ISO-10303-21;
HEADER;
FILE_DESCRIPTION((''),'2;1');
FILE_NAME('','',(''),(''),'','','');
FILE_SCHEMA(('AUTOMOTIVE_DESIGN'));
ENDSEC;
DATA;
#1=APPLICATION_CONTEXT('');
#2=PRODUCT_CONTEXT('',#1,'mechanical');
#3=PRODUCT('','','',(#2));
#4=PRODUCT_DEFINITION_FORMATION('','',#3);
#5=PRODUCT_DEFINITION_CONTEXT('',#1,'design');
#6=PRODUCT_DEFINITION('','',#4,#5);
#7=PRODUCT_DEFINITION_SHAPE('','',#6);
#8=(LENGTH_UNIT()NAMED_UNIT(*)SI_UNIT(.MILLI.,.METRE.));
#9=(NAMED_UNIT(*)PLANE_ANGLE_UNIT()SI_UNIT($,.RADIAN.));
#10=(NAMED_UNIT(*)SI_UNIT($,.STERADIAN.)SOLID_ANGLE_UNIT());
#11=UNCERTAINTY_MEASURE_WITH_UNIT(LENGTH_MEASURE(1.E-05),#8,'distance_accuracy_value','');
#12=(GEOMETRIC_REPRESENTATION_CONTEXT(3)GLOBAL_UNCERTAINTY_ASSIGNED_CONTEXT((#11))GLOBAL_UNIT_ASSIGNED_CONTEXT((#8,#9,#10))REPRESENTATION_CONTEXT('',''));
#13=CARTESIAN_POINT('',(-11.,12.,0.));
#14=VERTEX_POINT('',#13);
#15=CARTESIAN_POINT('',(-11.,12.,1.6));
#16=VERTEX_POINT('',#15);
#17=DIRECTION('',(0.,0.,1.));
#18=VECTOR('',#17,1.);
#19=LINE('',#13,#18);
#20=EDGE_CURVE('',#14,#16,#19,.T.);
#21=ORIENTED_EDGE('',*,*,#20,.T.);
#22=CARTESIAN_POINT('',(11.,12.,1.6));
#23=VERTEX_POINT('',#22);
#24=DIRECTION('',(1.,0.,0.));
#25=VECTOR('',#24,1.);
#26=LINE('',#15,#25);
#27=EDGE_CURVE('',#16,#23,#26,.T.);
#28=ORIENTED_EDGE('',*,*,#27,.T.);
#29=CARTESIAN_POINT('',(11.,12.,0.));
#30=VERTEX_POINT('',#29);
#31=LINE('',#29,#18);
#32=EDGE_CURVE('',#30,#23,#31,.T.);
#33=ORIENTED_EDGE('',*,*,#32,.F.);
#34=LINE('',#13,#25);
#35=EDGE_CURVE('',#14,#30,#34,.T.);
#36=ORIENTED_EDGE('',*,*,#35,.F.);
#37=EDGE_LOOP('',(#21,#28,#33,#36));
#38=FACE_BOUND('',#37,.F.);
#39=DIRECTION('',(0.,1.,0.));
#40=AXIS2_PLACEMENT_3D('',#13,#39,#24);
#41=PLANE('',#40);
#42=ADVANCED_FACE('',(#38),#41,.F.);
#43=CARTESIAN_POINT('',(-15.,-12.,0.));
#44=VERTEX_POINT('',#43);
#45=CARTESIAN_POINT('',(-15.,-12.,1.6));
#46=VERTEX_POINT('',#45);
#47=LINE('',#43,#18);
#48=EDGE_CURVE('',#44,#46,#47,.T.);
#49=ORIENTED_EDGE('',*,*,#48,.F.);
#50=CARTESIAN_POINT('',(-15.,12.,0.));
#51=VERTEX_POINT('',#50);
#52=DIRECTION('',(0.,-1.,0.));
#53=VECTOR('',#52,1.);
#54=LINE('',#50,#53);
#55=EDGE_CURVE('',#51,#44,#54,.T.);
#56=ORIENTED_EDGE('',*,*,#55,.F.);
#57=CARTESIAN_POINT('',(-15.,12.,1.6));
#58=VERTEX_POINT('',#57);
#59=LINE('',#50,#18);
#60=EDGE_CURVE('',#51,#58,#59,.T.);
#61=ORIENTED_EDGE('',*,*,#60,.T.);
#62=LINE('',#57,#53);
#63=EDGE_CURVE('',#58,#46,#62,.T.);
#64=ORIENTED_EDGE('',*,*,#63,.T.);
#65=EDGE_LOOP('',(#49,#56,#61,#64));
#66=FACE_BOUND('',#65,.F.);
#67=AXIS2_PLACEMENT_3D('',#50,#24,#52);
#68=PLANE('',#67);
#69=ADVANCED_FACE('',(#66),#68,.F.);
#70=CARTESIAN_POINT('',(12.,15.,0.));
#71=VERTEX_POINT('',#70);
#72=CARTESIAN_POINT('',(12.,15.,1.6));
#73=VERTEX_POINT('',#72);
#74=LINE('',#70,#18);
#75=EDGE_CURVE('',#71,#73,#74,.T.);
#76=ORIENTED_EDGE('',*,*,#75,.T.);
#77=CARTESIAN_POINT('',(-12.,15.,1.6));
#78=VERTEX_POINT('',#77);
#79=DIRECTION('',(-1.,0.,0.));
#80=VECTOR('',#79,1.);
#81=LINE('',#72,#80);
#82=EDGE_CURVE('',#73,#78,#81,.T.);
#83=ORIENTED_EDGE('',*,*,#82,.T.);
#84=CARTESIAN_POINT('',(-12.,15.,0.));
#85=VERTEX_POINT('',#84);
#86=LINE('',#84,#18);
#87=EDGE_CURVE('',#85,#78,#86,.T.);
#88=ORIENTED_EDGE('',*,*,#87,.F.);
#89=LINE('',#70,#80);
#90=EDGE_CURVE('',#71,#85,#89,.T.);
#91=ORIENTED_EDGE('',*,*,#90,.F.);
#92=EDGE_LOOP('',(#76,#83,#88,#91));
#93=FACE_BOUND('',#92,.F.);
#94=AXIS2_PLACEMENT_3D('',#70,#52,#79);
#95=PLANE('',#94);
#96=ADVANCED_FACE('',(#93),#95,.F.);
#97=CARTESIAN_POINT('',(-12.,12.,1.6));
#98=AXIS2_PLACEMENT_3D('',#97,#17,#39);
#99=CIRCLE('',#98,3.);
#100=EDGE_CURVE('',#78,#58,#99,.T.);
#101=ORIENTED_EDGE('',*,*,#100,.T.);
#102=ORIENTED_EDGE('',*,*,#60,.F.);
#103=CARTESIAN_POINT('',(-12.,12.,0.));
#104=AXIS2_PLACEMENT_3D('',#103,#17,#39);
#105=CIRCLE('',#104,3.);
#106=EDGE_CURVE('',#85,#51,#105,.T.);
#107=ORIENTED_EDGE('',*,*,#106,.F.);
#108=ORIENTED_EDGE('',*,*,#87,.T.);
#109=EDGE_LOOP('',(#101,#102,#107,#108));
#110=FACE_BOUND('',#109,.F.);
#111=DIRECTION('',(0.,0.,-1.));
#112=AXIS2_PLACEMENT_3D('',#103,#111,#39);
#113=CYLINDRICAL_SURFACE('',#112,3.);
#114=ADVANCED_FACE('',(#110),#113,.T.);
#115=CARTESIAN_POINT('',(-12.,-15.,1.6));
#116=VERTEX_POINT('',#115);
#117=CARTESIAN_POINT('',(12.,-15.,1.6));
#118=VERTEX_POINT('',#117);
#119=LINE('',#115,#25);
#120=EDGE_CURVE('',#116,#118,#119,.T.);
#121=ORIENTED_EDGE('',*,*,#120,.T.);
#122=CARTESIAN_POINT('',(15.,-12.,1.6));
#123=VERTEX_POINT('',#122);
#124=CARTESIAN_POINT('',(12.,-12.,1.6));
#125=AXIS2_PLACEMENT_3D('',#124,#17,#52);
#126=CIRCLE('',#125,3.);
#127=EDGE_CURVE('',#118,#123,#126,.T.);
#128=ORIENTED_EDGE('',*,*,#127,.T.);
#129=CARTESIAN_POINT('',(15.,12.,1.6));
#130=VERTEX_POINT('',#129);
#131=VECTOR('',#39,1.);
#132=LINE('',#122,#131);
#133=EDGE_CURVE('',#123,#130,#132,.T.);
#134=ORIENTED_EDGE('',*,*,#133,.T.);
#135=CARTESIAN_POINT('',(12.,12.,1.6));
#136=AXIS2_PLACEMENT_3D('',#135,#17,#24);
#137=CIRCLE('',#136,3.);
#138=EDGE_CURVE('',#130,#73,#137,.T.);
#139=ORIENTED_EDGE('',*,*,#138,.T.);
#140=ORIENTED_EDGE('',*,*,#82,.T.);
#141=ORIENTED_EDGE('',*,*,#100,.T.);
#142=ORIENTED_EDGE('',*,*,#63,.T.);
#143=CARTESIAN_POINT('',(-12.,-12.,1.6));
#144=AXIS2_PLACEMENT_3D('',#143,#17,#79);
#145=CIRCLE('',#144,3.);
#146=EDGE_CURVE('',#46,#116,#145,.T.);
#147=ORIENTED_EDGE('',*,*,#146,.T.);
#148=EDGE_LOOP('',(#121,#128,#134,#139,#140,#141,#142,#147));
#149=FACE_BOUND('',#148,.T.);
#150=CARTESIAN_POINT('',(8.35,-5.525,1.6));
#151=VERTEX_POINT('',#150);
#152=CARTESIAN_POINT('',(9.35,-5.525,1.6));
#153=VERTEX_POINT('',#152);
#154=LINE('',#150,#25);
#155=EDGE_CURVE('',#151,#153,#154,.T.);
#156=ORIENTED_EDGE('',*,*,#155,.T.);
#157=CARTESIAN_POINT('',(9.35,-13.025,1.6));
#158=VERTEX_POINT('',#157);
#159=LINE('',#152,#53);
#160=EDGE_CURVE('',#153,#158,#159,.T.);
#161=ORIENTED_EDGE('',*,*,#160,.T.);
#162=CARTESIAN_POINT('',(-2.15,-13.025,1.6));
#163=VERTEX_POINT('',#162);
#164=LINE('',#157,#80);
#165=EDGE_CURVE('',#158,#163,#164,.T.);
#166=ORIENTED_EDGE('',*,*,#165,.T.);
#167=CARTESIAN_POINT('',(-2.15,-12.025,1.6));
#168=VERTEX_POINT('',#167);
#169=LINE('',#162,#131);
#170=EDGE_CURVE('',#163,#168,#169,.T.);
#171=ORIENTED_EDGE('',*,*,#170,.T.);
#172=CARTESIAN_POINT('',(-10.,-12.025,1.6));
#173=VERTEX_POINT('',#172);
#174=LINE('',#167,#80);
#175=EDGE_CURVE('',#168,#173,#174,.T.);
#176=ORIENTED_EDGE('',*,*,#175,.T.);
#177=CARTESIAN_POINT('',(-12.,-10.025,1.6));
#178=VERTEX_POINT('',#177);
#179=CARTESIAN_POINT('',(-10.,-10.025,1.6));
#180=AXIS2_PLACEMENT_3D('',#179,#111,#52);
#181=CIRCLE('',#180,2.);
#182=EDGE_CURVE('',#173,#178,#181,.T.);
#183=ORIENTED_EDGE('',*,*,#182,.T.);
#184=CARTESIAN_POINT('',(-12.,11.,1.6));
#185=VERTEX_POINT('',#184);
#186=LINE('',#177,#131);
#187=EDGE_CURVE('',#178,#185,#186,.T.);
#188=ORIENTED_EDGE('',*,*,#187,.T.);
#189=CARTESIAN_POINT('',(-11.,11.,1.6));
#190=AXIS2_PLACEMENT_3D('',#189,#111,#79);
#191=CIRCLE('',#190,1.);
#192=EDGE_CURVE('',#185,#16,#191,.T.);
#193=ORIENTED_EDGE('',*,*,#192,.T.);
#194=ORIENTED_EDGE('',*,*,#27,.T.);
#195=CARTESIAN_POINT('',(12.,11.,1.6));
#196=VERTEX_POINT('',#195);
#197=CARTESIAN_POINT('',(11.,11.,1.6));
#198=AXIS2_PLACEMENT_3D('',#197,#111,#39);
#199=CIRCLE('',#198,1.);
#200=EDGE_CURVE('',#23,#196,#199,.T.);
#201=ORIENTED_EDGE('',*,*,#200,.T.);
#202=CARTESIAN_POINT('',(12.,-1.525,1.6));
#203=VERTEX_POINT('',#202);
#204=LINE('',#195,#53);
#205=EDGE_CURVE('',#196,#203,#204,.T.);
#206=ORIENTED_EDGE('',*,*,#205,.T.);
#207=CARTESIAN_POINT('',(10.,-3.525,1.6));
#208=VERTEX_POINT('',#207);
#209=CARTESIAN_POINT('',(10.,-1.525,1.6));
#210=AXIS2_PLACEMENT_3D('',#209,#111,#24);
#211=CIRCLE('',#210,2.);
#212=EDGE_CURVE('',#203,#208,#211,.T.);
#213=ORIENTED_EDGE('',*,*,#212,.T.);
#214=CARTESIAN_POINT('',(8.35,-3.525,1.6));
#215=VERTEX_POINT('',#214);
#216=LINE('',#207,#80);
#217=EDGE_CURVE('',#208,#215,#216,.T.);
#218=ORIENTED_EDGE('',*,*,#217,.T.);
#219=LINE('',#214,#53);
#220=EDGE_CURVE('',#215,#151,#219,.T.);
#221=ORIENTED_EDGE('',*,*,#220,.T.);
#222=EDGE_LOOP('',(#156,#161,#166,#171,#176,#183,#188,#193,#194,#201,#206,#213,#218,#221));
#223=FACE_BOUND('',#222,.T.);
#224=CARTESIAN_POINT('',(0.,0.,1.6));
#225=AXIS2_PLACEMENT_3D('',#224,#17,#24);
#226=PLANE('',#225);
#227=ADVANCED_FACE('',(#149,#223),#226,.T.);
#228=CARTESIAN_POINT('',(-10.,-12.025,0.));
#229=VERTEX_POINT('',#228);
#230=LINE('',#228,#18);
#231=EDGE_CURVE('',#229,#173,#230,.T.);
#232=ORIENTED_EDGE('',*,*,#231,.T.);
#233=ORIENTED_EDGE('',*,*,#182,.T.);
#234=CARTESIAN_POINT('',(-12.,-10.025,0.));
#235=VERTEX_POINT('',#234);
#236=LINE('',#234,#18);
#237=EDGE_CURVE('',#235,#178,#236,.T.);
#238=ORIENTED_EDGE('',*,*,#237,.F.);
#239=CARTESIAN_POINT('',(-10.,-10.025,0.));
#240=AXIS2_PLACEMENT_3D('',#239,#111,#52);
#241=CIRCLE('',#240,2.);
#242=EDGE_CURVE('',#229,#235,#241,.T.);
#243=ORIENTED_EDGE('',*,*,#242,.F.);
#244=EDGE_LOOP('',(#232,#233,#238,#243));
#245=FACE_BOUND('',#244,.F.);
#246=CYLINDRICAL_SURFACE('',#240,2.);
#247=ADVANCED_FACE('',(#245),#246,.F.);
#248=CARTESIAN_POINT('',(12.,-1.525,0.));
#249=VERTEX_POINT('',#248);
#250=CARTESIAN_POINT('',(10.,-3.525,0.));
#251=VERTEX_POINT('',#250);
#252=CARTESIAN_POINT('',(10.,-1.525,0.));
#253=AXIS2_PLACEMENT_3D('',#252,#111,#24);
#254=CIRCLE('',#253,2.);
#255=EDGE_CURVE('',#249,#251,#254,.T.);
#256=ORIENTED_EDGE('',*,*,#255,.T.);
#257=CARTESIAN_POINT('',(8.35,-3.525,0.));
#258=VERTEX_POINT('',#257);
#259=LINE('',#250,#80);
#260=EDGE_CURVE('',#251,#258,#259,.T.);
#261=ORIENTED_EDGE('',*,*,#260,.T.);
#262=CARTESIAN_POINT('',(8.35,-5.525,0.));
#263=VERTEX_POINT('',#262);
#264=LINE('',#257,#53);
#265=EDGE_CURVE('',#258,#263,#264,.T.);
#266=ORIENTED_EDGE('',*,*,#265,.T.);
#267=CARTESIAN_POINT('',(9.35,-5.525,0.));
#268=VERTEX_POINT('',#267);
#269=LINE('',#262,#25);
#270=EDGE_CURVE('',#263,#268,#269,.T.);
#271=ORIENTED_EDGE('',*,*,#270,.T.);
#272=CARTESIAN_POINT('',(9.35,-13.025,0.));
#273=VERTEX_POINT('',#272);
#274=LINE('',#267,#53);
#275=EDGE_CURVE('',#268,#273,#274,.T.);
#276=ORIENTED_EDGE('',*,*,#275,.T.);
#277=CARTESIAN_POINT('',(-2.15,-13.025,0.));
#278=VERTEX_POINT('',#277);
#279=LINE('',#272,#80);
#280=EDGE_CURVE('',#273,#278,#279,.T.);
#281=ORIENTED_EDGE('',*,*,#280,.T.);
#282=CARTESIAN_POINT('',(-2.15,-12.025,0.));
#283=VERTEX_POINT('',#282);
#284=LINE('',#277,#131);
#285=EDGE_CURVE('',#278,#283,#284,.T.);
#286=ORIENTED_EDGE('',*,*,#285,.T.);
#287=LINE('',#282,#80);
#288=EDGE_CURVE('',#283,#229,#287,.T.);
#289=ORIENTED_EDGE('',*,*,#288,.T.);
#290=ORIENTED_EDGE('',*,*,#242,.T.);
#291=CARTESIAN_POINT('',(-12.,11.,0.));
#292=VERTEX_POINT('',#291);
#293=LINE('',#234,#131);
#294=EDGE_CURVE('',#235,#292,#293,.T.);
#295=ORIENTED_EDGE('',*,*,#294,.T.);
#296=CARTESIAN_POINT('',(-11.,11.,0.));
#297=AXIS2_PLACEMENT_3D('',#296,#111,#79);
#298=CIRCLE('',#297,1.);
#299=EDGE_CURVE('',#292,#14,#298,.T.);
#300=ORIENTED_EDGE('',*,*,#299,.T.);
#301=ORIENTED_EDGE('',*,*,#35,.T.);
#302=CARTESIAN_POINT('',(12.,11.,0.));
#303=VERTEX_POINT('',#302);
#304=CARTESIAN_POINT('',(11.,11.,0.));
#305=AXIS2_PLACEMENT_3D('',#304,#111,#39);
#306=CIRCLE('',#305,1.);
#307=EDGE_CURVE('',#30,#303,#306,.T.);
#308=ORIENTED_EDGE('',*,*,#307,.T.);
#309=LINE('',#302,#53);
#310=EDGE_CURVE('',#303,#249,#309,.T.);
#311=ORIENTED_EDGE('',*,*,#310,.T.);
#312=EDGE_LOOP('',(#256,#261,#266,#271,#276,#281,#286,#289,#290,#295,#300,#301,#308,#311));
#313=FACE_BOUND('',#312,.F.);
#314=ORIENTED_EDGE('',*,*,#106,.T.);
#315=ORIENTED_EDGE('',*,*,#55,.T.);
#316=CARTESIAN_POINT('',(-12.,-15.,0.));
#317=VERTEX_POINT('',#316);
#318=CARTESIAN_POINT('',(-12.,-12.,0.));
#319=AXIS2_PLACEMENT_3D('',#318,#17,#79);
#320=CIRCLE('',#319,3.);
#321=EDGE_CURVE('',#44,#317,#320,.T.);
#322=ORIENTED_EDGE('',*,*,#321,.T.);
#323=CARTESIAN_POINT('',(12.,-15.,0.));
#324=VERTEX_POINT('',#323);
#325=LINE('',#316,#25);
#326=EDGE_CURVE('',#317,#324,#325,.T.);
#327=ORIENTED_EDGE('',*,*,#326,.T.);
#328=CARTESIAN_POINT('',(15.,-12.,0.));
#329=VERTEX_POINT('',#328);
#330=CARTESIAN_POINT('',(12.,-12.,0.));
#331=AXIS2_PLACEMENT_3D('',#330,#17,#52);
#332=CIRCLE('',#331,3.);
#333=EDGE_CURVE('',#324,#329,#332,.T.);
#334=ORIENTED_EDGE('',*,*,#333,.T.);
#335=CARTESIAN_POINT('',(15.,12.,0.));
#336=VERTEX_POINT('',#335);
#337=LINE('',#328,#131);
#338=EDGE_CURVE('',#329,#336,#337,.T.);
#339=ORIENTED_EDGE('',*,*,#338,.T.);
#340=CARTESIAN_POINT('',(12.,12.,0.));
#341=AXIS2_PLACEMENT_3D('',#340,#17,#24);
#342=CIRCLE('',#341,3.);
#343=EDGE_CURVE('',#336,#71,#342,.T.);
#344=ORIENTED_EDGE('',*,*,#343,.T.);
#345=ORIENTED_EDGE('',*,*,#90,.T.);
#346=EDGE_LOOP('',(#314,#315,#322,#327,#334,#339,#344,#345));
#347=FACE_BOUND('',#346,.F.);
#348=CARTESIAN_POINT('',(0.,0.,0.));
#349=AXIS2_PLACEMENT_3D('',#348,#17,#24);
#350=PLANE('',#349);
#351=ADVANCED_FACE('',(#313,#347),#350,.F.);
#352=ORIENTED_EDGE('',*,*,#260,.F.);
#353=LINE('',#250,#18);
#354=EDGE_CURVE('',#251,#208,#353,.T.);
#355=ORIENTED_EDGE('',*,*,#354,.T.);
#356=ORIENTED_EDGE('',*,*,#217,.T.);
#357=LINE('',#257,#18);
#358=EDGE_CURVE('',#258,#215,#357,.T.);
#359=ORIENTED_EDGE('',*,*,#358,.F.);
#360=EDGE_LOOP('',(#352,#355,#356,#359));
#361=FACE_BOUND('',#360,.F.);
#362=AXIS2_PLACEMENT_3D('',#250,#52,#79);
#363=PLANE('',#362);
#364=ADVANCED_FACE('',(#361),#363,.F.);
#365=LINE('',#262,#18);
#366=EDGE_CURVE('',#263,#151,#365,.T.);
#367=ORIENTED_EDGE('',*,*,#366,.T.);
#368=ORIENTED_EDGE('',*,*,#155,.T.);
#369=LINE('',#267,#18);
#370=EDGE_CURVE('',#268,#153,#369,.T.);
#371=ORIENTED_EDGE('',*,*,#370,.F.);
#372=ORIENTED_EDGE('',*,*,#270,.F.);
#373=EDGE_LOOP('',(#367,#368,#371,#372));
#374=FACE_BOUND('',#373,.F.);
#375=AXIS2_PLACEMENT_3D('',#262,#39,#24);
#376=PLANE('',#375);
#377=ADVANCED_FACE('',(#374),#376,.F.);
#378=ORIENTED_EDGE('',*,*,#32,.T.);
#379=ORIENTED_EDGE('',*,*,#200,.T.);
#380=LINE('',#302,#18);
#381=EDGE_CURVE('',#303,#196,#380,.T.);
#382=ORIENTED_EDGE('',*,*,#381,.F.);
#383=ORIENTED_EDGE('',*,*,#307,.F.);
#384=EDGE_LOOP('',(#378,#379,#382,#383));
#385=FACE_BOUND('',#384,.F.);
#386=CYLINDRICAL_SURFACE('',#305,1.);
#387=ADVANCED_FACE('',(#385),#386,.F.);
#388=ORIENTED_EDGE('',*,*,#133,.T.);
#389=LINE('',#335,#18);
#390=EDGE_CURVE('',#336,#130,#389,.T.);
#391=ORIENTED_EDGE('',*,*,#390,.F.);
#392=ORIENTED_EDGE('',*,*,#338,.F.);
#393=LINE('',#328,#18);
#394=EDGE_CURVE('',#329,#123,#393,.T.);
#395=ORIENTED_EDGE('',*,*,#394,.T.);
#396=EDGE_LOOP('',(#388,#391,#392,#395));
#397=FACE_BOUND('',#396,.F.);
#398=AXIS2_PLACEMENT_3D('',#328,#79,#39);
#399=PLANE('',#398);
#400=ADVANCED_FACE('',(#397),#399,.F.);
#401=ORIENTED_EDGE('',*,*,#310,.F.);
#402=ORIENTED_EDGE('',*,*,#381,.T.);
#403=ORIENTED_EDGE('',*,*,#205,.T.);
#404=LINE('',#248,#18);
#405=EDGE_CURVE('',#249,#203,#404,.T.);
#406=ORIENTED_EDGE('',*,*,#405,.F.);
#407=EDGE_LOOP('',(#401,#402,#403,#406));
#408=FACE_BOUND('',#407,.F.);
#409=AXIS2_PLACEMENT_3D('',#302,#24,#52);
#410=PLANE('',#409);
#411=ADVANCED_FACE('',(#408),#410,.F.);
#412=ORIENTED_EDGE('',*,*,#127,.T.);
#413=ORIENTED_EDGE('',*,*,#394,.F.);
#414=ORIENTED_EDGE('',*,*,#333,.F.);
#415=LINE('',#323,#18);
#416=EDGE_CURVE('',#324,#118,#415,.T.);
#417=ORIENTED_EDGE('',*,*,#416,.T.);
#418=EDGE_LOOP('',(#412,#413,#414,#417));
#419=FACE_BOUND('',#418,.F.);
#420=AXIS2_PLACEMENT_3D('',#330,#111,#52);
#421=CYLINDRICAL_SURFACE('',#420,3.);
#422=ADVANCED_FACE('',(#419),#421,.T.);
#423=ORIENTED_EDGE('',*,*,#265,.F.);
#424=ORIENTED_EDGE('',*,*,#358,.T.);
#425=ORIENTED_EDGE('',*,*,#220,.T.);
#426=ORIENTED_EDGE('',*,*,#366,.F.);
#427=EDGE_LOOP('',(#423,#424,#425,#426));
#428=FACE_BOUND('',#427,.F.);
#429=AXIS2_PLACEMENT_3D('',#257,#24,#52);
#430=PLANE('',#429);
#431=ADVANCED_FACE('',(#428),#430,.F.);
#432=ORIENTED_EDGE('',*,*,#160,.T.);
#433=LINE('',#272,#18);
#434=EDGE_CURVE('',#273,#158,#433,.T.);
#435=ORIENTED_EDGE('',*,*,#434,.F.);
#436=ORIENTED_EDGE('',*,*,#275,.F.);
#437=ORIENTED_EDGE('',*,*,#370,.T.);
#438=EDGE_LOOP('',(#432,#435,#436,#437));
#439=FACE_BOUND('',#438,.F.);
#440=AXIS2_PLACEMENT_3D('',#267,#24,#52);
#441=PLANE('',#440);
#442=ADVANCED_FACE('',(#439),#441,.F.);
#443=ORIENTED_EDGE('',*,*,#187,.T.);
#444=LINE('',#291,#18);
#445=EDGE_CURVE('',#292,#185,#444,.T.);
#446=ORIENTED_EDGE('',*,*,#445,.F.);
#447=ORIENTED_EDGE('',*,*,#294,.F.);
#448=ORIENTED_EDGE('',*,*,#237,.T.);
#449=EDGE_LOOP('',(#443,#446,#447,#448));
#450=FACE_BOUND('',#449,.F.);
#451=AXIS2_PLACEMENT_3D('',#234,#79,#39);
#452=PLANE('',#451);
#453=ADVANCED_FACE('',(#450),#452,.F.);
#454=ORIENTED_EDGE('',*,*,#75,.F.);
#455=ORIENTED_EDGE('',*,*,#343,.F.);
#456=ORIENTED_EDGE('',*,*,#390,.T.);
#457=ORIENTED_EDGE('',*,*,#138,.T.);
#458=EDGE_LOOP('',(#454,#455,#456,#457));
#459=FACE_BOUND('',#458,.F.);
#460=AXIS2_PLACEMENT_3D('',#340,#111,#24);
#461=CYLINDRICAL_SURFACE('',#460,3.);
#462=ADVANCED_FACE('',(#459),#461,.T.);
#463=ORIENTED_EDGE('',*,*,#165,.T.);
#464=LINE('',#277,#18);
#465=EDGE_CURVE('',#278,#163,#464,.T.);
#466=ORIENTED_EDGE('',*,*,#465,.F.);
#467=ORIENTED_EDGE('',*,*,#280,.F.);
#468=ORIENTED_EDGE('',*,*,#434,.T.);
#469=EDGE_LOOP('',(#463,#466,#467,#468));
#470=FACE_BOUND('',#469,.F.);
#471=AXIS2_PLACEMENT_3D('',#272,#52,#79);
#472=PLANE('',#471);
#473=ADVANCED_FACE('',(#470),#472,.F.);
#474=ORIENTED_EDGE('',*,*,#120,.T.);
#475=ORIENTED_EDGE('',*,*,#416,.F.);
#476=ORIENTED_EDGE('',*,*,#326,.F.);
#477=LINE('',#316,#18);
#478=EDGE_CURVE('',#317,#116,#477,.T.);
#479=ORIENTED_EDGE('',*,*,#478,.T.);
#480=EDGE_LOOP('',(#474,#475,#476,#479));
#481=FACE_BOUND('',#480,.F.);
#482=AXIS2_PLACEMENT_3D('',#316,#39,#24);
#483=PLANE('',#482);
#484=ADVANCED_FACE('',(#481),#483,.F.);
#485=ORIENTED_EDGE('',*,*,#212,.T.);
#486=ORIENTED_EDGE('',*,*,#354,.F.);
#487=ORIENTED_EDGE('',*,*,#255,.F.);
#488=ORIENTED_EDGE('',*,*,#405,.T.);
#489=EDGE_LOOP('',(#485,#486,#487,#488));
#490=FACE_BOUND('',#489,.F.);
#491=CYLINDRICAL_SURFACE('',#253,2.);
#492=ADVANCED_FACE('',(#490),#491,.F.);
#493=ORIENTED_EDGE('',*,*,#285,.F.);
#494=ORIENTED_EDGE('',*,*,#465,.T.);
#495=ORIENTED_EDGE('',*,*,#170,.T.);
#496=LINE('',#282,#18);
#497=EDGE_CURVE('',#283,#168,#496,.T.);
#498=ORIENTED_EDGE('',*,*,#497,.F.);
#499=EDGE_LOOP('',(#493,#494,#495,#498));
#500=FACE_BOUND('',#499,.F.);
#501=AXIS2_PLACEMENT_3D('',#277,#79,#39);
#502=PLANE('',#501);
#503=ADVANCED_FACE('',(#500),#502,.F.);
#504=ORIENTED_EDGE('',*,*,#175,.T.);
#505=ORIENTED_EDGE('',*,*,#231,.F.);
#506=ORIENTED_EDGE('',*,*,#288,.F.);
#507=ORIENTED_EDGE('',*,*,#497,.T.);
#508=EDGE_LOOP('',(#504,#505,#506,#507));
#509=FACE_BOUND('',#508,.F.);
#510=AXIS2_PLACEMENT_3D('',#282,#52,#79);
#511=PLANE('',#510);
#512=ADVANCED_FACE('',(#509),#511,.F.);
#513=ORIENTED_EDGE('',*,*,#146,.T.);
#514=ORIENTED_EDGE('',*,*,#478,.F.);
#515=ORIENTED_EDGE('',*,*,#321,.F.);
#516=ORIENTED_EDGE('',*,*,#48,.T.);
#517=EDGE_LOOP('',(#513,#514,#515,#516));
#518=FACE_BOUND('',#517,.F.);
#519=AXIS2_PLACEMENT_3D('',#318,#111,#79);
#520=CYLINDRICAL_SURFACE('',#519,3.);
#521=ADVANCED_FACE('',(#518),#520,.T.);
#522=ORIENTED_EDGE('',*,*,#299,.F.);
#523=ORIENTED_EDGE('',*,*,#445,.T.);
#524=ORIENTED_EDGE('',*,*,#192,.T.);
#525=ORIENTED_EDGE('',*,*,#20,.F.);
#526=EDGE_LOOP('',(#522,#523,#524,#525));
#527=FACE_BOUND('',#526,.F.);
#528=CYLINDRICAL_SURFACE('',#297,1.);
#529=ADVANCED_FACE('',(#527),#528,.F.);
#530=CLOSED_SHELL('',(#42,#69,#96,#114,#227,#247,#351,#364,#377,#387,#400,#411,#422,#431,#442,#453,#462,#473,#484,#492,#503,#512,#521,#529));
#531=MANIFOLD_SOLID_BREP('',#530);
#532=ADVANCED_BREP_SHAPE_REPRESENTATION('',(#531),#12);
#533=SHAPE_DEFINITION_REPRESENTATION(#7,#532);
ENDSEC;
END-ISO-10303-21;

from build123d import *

# Parameters (mm, degrees)
F1_DEPTH = 1.6


# Not quite as in the source:
# - a feature names something its author has since deleted; it is built from what else it names


with BuildPart() as f1:
    # F0 (on Top) → F1 (new body)
    with BuildSketch(Plane.XY):
        with BuildLine():
            ThreePointArc((15, 12), (14.1213203436, 14.1213203436), (12, 15))
            Line((12, 15), (-12, 15))
            ThreePointArc((-12, 15), (-14.1213203436, 14.1213203436), (-15, 12))
            Line((-15, 12), (-15, -12))
            ThreePointArc((-15, -12), (-14.1213203436, -14.1213203436), (-12, -15))
            Line((-12, -15), (12, -15))
            ThreePointArc((12, -15), (14.1213203436, -14.1213203436), (15, -12))
            Line((15, -12), (15, 12))
        make_face()
        with BuildLine():
            Line((9.35, -13.025), (-2.15, -13.025))
            Line((-2.15, -13.025), (-2.15, -12.025))
            Line((-2.15, -12.025), (-10, -12.025))
            ThreePointArc((-10, -12.025), (-11.4142135624, -11.4392135624), (-12, -10.025))
            Line((-12, -10.025), (-12, 11))
            ThreePointArc((-12, 11), (-11.7071067812, 11.7071067812), (-11, 12))
            Line((-11, 12), (11, 12))
            ThreePointArc((11, 12), (11.7071067812, 11.7071067812), (12, 11))
            Line((12, 11), (12, -1.525))
            ThreePointArc((12, -1.525), (11.4142135624, -2.9392135624), (10, -3.525))
            Line((10, -3.525), (8.35, -3.525))
            Line((8.35, -3.525), (8.35, -5.525))
            Line((8.35, -5.525), (9.35, -5.525))
            Line((9.35, -5.525), (9.35, -13.025))
        make_face(mode=Mode.SUBTRACT)
    extrude(amount=F1_DEPTH)


solid = f1.part
